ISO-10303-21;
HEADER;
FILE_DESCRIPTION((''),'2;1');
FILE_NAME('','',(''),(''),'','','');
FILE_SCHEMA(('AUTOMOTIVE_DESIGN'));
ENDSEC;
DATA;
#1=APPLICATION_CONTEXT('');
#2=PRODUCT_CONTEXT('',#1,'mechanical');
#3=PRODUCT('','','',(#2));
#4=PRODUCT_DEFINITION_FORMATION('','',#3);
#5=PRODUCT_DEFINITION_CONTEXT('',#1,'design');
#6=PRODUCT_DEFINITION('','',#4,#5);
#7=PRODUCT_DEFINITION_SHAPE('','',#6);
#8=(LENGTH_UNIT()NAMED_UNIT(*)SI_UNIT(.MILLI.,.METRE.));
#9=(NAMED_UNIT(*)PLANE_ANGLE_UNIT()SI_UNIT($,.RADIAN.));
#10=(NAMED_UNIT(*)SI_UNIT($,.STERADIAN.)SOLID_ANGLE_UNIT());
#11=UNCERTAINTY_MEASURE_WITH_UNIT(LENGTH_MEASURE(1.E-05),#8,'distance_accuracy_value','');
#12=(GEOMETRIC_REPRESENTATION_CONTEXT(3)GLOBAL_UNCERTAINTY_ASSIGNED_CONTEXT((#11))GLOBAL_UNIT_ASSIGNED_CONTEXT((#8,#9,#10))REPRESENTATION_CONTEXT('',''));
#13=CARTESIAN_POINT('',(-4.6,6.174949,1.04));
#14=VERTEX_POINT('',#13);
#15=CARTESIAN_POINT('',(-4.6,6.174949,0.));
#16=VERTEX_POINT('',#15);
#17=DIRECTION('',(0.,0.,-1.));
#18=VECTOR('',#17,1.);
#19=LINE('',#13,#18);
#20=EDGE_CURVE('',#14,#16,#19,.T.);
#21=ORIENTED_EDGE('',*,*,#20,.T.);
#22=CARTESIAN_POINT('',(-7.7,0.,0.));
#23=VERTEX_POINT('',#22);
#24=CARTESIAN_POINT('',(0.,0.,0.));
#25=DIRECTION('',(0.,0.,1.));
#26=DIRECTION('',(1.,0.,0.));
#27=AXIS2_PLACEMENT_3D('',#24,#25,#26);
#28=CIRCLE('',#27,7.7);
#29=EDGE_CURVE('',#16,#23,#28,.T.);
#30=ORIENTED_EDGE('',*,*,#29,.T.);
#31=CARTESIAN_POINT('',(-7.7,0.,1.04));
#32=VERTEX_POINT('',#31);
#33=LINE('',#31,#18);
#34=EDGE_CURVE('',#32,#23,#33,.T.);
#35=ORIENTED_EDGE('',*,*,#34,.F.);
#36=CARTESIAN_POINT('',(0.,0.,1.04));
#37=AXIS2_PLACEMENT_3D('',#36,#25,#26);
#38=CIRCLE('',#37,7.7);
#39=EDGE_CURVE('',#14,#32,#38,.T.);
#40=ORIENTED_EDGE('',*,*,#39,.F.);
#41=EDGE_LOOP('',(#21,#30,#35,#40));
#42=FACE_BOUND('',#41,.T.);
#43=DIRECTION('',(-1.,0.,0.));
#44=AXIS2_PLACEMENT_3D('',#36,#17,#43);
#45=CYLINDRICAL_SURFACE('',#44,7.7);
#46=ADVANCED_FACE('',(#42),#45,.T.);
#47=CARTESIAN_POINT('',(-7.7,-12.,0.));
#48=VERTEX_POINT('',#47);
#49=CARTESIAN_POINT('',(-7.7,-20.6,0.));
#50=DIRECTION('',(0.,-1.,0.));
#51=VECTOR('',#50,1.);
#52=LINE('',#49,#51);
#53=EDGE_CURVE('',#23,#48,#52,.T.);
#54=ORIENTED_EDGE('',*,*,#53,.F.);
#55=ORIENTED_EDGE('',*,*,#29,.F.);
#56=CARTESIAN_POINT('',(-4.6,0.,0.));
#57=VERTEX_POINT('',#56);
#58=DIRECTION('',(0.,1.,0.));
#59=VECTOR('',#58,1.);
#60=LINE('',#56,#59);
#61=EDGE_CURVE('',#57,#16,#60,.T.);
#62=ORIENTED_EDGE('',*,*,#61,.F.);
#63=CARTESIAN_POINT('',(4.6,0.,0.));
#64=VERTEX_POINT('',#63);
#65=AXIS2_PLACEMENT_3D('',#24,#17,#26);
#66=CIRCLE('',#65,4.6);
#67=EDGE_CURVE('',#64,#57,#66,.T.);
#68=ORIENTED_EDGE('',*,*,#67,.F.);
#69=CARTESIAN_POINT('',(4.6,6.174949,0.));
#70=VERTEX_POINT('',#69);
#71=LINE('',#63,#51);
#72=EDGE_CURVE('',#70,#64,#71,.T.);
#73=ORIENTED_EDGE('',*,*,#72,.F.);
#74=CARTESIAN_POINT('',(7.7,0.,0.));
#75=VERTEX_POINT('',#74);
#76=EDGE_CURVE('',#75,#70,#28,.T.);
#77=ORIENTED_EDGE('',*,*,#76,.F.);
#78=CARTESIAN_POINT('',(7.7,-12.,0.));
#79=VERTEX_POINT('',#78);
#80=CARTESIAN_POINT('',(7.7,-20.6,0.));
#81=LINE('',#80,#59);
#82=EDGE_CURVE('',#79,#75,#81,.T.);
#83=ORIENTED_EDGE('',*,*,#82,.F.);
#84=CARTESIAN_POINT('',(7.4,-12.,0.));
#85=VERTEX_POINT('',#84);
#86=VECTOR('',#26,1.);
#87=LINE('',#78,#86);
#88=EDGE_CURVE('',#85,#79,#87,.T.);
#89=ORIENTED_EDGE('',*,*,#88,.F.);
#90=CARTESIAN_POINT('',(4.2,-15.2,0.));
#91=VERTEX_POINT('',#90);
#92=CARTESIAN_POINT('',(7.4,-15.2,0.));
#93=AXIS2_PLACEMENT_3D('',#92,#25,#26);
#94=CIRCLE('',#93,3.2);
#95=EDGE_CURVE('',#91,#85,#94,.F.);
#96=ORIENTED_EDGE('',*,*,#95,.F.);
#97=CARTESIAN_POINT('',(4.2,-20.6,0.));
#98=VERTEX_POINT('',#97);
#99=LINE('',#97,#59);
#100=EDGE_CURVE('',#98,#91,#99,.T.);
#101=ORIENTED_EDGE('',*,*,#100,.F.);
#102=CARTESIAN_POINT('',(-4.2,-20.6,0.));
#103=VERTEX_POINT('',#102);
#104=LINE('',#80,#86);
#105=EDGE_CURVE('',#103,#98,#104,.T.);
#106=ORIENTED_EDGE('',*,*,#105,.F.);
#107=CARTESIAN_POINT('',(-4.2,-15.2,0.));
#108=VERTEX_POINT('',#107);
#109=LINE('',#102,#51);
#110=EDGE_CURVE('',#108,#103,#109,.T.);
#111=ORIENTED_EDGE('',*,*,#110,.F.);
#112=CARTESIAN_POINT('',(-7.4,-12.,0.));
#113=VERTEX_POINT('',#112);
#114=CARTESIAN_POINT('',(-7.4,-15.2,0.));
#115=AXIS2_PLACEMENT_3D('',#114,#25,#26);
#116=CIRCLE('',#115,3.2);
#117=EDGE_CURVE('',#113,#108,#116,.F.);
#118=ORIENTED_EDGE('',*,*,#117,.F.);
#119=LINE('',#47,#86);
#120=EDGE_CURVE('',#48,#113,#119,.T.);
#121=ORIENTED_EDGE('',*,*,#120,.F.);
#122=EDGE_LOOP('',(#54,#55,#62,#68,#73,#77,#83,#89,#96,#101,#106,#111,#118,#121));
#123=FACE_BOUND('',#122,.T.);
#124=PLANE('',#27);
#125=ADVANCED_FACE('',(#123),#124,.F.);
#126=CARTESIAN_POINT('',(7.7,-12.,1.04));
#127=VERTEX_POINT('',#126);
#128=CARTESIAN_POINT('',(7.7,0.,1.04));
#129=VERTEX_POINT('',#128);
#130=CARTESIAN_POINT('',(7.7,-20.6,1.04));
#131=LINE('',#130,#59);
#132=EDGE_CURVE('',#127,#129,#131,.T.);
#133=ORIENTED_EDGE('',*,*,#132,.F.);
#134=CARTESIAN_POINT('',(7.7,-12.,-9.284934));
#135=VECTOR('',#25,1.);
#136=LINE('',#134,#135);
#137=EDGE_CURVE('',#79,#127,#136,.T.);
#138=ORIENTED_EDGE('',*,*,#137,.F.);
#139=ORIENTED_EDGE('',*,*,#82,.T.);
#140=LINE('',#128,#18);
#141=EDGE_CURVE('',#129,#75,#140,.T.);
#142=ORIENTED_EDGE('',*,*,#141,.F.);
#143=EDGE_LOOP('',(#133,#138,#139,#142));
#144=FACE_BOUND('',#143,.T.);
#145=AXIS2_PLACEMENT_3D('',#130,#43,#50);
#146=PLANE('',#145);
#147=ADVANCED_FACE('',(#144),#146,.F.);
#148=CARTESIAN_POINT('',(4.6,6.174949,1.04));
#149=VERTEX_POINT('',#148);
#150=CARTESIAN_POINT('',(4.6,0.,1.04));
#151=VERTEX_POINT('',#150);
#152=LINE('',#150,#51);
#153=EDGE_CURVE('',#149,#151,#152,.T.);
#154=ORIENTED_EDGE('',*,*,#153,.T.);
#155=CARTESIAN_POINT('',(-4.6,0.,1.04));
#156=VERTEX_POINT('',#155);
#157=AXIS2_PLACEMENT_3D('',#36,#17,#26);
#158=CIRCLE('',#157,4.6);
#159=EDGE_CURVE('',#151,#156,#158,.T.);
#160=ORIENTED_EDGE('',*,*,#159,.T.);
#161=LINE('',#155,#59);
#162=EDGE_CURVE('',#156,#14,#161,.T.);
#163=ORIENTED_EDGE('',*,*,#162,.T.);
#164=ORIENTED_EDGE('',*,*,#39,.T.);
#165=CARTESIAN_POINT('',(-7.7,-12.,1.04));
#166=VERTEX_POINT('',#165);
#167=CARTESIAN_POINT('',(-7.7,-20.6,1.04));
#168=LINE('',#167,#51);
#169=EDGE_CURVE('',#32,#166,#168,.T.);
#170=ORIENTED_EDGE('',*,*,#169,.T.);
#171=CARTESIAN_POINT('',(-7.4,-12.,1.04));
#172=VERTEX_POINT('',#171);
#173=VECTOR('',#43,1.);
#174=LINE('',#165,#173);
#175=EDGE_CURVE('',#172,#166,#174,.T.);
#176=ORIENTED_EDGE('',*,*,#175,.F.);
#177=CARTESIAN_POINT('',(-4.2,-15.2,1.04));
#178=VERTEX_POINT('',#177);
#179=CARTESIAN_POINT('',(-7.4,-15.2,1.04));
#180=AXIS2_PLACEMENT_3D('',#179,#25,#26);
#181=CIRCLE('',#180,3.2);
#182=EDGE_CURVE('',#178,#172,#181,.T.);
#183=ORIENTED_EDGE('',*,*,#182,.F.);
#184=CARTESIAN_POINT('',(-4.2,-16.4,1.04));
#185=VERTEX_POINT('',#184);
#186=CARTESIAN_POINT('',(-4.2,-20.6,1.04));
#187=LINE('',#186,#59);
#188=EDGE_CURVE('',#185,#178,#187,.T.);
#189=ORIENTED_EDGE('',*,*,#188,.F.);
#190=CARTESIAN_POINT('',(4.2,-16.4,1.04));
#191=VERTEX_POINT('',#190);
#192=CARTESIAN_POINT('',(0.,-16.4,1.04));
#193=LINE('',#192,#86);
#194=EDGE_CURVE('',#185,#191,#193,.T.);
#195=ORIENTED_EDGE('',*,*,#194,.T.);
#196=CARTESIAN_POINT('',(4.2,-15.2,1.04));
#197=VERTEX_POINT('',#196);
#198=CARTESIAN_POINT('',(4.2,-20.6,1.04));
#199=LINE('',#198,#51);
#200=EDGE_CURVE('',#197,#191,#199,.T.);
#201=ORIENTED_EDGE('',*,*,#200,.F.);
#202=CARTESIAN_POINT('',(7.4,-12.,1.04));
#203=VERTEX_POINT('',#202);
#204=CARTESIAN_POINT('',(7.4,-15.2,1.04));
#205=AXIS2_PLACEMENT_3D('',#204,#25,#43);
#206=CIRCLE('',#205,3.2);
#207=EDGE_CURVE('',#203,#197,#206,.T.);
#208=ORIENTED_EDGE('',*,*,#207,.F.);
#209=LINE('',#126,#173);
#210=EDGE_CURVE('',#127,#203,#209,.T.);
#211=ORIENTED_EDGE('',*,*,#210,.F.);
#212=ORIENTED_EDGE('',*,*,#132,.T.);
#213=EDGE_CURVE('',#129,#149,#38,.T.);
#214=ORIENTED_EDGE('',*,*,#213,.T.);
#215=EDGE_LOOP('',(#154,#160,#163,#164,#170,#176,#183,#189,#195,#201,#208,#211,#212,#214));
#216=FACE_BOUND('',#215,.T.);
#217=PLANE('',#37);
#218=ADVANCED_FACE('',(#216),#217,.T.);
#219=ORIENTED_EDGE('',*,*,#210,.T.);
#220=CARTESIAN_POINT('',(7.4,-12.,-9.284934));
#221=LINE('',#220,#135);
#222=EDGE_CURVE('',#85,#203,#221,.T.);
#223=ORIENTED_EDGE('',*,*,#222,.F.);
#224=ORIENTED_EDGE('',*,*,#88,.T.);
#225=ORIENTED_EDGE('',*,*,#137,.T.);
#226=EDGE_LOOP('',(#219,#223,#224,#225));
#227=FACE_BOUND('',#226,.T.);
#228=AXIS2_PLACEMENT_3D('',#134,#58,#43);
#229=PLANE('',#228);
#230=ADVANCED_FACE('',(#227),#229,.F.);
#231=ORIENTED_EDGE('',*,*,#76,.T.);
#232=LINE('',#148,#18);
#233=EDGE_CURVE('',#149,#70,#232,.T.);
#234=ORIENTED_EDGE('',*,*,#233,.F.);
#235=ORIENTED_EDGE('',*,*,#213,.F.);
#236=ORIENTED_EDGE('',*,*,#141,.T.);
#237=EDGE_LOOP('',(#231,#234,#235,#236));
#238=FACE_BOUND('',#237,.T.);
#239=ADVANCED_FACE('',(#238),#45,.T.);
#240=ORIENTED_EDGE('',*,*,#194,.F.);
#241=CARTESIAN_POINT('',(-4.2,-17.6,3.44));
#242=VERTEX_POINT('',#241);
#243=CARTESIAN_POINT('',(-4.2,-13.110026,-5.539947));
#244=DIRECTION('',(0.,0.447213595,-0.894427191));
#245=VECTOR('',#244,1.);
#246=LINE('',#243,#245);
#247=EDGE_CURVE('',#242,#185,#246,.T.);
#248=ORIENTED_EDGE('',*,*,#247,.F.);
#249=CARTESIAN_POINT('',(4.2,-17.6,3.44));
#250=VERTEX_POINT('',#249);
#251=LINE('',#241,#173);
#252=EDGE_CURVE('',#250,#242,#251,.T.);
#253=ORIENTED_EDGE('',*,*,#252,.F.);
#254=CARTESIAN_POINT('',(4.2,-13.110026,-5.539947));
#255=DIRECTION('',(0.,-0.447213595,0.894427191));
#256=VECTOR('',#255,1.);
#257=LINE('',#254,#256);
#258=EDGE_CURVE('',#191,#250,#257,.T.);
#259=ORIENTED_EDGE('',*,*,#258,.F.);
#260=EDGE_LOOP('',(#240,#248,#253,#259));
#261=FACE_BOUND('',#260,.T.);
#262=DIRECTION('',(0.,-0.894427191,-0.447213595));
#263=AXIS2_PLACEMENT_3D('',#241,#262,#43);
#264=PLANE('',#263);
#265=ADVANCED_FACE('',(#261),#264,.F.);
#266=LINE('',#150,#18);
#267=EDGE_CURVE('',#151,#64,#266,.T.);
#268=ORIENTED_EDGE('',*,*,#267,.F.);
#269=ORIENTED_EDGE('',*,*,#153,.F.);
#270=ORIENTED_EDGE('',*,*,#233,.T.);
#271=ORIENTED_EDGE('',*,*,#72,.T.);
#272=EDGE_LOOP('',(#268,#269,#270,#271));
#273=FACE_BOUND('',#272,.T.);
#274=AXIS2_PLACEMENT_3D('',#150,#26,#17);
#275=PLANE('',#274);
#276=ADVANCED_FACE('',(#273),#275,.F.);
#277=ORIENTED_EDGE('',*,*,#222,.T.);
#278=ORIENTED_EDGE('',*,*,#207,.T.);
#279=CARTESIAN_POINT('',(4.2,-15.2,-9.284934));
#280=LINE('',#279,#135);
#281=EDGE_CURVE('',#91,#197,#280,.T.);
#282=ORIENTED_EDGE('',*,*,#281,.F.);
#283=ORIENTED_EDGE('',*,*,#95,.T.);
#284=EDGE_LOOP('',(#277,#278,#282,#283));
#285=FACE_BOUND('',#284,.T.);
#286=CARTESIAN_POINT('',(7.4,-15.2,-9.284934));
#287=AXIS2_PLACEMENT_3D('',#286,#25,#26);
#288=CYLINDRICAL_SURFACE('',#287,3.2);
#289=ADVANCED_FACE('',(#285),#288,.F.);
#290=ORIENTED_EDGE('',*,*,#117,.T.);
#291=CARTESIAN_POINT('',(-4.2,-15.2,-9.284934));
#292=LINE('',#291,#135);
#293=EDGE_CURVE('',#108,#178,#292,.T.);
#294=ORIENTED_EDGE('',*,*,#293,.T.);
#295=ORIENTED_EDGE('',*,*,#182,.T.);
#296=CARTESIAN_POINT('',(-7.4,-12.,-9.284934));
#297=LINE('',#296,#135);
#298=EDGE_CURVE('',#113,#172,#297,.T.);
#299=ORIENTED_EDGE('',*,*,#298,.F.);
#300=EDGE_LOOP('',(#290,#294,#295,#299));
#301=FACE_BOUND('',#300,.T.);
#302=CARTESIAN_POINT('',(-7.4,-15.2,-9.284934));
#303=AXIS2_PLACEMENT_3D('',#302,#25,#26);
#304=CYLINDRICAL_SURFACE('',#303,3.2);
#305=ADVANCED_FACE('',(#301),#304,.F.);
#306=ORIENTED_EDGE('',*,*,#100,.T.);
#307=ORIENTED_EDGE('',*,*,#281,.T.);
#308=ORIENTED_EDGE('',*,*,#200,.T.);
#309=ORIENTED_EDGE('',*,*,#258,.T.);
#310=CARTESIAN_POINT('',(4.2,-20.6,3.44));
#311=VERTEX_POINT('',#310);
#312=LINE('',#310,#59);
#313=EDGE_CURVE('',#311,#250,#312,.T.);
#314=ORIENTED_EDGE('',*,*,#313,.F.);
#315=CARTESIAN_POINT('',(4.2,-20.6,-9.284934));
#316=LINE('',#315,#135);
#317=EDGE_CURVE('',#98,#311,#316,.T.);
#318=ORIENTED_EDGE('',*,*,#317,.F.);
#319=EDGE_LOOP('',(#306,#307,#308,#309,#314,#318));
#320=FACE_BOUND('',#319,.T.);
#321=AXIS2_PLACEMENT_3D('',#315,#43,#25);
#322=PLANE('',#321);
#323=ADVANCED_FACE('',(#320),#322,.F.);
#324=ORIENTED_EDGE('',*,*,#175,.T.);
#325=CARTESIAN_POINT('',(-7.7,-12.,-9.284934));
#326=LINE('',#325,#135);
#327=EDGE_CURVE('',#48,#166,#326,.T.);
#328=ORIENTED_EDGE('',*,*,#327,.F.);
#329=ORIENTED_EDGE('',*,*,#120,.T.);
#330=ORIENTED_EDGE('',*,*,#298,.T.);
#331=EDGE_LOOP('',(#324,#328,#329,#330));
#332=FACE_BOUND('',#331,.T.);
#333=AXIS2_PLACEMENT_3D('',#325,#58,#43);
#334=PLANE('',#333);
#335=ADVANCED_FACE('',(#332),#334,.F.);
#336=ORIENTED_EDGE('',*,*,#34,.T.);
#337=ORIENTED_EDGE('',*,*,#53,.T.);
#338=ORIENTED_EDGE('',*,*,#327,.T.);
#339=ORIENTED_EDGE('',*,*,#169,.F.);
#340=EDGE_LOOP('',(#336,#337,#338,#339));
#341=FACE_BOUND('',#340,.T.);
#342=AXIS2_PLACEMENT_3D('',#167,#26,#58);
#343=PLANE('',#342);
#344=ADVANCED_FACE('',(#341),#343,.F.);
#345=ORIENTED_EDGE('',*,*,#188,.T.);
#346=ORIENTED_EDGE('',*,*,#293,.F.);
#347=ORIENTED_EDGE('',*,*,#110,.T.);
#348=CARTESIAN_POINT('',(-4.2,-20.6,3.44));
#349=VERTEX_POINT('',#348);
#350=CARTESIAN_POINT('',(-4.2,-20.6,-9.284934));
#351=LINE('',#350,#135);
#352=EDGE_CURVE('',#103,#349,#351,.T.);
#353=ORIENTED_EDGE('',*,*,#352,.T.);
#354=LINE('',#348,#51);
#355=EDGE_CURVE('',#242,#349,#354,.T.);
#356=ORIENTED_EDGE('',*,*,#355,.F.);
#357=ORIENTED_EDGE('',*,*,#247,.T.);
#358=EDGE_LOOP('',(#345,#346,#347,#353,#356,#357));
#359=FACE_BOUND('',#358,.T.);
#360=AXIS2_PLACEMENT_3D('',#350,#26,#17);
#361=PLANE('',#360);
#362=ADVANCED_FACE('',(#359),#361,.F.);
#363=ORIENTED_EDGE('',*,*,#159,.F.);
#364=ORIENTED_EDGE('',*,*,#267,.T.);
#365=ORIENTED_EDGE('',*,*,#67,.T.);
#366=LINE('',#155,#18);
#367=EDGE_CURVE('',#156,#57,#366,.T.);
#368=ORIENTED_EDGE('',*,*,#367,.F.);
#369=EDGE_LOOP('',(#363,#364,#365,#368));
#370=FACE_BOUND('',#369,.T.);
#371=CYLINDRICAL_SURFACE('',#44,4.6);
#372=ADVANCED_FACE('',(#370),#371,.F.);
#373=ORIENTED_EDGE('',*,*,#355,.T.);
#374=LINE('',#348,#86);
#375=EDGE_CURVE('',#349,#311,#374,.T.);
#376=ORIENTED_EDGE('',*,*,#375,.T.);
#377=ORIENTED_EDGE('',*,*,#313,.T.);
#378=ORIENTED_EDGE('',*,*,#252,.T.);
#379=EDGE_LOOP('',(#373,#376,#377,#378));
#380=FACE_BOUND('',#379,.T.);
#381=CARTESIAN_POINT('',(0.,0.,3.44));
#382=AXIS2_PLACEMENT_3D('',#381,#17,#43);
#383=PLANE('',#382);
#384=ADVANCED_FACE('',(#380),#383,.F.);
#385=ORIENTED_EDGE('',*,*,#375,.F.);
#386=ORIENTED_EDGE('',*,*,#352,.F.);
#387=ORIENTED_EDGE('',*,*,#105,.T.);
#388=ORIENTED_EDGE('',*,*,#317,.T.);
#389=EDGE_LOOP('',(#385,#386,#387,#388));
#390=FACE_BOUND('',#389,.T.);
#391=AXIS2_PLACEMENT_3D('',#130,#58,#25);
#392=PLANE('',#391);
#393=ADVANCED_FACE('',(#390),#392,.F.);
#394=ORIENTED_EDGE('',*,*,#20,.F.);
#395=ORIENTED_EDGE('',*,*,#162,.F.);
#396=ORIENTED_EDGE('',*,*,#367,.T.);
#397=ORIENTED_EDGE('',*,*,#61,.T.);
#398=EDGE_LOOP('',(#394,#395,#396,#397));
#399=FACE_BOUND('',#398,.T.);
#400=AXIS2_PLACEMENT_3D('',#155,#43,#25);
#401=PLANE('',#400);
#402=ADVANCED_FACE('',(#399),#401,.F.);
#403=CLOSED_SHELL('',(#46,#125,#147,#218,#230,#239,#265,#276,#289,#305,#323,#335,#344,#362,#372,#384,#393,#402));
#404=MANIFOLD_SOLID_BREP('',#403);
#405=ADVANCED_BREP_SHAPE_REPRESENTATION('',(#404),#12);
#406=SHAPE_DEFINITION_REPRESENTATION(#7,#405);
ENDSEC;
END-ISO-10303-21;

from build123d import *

# Parameters (mm, degrees)
EXTRUDE_1_DEPTH     = 1.04
CUT_EXTRUDE_1_DEPTH = 1.04
SKETCH_4_W          = 8.4
SKETCH_4_H          = 3
EXTRUDE_2_DEPTH     = 2.4
CHAMFER_1_SIZE      = 1.2
CHAMFER_1_SIZE_2    = 2.4


with BuildPart() as part:
    # Эскиз1 → Бобышка-Вытянуть1 (new body)
    with BuildSketch(Plane.XY):
        with BuildLine():
            Line((-4.6, 0), (-4.6, 6.174949393))
            ThreePointArc((-4.6, 6.174949393), (-6.88149693, 3.454706934), (-7.7, 0))
            Line((-7.7, 0), (-7.7, -20.6))
            Line((-7.7, -20.6), (7.7, -20.6))
            Line((7.7, -20.6), (7.7, 0))
            ThreePointArc((7.7, 0), (6.88149693, 3.454706934), (4.6, 6.174949393))
            Line((4.6, 6.174949393), (4.6, 0))
            ThreePointArc((4.6, 0), (0, -4.6), (-4.6, 0))
        make_face()
    extrude(amount=EXTRUDE_1_DEPTH)

    # Эскиз3 → Вырез-Вытянуть1 (cut)
    with BuildSketch(Plane.XY.offset(1.04)):
        with BuildLine():
            Line((-7.7, -20.6), (-4.2, -20.6))
            Line((-4.2, -20.6), (-4.2, -15.2))
            ThreePointArc((-4.2, -15.2), (-5.1372583, -12.9372583), (-7.4, -12))
            Line((-7.4, -12), (-7.7, -12))
            Line((-7.7, -12), (-7.7, -20.6))
        make_face()
        with BuildLine():
            Line((4.2, -20.6), (4.2, -15.2))
            ThreePointArc((4.2, -15.2), (5.1372583, -12.9372583), (7.4, -12))
            Line((7.4, -12), (7.7, -12))
            Line((7.7, -12), (7.7, -20.6))
            Line((7.7, -20.6), (4.2, -20.6))
        make_face()
    extrude(amount=-CUT_EXTRUDE_1_DEPTH, mode=Mode.SUBTRACT)

    # Эскиз4 → Бобышка-Вытянуть2 (add)
    with BuildSketch(Plane.XY.offset(1.04)):
        with Locations((0, -19.1)):
            Rectangle(SKETCH_4_W, SKETCH_4_H)
    extrude(amount=EXTRUDE_2_DEPTH)

    # Фаска1
    # the kernel refuses this chamfer: 2.4, 1.2 mm, written as the material it adds along each edge
    with BuildSketch(Plane(origin=(4.2, -17.6, 1.04), x_dir=(0, 0.9976223042390325, -0.06891834360170876), z_dir=(-1, 0, 0))) as chamfer_1_piece_1_section:
        Polygon((CHAMFER_1_SIZE * 0.997622304239, -CHAMFER_1_SIZE * 0.0689183436017), (-CHAMFER_1_SIZE_2 * 0.0689183436017, -CHAMFER_1_SIZE_2 * 0.997622304239), (0, 0), align=None)
    chamfer_1_piece_1 = extrude(amount=8.4, mode=Mode.PRIVATE)
    chamfer_1_piece_1 = split(chamfer_1_piece_1, bisect_by=Plane(origin=(0, -17.217816218, 3.44), z_dir=(0, 0, -1)), keep=Keep.TOP, mode=Mode.PRIVATE)
    add(chamfer_1_piece_1)


solid = part.part
